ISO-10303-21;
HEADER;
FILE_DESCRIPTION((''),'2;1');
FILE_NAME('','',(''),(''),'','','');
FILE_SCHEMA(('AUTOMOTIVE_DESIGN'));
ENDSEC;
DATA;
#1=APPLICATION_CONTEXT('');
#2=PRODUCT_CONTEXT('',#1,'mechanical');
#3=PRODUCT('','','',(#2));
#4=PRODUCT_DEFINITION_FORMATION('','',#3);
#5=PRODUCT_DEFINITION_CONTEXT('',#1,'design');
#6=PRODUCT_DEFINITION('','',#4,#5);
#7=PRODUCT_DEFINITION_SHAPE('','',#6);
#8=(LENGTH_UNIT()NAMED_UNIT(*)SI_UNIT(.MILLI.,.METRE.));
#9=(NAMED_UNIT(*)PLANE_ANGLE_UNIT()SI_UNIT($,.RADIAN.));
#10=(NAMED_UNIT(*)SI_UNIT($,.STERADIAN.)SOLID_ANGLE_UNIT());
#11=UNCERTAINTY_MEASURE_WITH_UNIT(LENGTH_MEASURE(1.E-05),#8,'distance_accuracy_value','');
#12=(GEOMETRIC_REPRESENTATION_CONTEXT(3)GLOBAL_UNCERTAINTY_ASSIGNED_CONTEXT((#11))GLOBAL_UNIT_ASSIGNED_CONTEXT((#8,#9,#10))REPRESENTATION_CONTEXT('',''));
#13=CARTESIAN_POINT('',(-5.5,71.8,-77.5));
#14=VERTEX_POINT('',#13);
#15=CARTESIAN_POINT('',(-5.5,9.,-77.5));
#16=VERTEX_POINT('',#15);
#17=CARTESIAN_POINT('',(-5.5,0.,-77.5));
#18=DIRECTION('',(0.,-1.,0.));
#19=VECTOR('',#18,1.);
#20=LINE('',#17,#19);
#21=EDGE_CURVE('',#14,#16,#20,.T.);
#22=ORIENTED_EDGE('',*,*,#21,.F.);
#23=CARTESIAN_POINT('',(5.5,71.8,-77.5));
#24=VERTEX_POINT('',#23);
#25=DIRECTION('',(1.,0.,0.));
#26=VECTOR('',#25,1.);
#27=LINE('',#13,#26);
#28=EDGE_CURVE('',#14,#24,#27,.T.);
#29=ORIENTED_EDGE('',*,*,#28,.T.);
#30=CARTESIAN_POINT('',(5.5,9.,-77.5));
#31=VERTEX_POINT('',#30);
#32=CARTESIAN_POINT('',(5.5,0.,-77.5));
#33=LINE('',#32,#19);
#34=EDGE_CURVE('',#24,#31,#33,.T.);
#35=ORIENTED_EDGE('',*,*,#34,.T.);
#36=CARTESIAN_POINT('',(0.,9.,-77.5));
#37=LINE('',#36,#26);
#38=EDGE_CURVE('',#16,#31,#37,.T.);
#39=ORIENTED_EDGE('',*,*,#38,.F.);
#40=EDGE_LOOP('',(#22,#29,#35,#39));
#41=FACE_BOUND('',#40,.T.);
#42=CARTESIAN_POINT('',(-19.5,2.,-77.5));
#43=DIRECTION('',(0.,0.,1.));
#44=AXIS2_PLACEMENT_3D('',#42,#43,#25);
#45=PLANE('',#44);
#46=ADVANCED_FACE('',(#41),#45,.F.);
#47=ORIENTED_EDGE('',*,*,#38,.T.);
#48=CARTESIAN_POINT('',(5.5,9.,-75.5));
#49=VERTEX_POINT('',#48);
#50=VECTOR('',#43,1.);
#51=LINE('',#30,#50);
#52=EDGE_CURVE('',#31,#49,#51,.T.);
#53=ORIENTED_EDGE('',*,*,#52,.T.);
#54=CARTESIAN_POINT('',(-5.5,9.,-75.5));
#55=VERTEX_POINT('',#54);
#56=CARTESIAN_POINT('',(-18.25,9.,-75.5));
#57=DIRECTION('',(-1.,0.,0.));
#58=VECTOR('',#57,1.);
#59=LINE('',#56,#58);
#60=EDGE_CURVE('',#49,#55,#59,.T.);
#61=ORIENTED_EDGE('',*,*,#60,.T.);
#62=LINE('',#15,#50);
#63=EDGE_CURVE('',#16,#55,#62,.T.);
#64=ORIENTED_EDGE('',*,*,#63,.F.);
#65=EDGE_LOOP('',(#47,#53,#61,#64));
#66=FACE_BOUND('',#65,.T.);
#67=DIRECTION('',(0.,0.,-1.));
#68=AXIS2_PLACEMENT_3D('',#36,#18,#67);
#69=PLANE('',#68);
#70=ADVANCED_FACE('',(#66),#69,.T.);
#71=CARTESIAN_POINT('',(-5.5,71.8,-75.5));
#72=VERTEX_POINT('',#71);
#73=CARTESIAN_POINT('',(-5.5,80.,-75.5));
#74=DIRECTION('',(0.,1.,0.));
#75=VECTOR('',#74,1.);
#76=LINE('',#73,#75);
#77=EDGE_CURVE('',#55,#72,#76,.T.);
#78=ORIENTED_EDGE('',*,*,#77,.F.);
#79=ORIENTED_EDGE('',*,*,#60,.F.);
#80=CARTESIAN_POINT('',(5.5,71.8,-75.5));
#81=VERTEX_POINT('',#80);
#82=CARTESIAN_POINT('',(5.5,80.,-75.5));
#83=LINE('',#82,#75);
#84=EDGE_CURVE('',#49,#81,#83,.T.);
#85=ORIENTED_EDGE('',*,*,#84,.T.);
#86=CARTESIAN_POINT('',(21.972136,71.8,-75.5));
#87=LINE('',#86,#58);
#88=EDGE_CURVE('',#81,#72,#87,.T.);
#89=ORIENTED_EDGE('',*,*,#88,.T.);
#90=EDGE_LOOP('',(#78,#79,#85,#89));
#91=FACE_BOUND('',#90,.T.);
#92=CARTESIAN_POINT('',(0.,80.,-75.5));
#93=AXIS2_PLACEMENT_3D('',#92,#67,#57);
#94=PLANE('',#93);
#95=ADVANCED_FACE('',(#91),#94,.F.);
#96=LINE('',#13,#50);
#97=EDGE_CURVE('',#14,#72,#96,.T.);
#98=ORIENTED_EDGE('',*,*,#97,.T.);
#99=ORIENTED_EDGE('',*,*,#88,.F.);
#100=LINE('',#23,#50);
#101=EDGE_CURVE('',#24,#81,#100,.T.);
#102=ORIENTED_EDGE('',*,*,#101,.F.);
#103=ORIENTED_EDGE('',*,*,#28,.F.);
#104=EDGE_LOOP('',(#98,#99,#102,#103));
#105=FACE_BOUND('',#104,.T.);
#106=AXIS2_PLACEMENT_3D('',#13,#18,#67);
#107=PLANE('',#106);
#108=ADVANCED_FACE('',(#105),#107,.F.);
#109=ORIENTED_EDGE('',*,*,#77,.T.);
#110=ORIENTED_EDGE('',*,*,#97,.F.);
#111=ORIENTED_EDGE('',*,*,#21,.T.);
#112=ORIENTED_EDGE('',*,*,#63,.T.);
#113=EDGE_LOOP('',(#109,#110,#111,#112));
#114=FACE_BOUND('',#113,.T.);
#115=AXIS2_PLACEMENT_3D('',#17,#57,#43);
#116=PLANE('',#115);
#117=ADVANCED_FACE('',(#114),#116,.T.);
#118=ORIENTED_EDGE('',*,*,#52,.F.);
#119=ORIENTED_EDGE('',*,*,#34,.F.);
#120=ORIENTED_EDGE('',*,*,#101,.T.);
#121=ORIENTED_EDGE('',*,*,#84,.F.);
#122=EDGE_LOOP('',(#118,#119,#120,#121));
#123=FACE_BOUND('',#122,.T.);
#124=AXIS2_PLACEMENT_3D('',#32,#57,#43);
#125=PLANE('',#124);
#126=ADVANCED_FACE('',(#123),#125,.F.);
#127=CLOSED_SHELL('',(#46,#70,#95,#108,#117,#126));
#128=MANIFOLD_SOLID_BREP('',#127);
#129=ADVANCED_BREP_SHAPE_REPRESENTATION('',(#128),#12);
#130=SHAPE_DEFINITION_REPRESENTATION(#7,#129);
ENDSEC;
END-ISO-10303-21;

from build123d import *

# Parameters (mm, degrees)
SKETCH1_W                       = 39
SKETCH1_H                       = 155
BOSS_EXTRUDE1_DEPTH             = 2
BOSS_EXTRUDE2_DEPTH             = 78
SKETCH3_W                       = 2
SKETCH3_H                       = 2
BOSS_EXTRUDE3_DEPTH             = 78
SKETCH4_W                       = 2
SKETCH4_H                       = 2
BOSS_EXTRUDE4_DEPTH             = 151
SKETCH6_W                       = 35
SKETCH6_H                       = 2.2
CUT_EXTRUDE1_DEPTH              = 174.750539568
SKETCH7_W                       = 35
SKETCH7_H                       = 2.2
CUT_EXTRUDE2_DEPTH              = 112.671392935
SKETCH5_W                       = 31
SKETCH5_H                       = 2
BOSS_EXTRUDE5_DEPTH             = 2
BOSS_EXTRUDE6_REACH             = 115.077
SKETCH8_W                       = 2
SKETCH8_H                       = 2
BOSS_EXTRUDE6_DIRECTION_2_REACH = 115.077
SKETCH10_W                      = 2
SKETCH10_H                      = 2.2
SKETCH10_W_2                    = 2.2
SKETCH10_H_2                    = 2
BOSS_EXTRUDE8_DEPTH             = 2
SKETCH11_W                      = 2
SKETCH11_H                      = 2.2
SKETCH11_W_2                    = 2.2
SKETCH11_H_2                    = 2
BOSS_EXTRUDE9_DEPTH             = 2
FILLET2_R                       = 2.5
SKETCH14_W                      = 36.5
SKETCH14_H                      = 7.75
BOSS_EXTRUDE10_DEPTH            = 2
SKETCH13_W                      = 31
SKETCH13_H                      = 3
CUT_EXTRUDE4_DEPTH              = 2
FILLET3_R                       = 2
FILLET4_R                       = 0.5
SKETCH15_R                      = 5.1
CUT_EXTRUDE5_DEPTH              = 114.077407116
SKETCH16_R                      = 7.1
BOSS_EXTRUDE11_DEPTH            = 1
FILLET5_R                       = 0.5
FILLET7_R                       = 0.5
CUT_EXTRUDE7_DEPTH              = 114.077407116
CUT_EXTRUDE7_DEPTH_BACK         = 114.077407116
SKETCH18_W                      = 9
SKETCH18_H                      = 71
CUT_EXTRUDE8_DEPTH              = 113.323194399
CUT_EXTRUDE9_DEPTH              = 81.213776872
CUT_EXTRUDE9_DEPTH_BACK         = 81.213776872
SKETCH19_W                      = 11
SKETCH19_H                      = 8.2


with BuildPart() as part:
    # Sketch1 → Boss-Extrude1 (new body)
    with BuildSketch(Plane(origin=(0, 0, 0), x_dir=(1, 0, 0), z_dir=(0, 1, 0))):
        Rectangle(SKETCH1_W, SKETCH1_H)
    extrude(amount=BOSS_EXTRUDE1_DEPTH)

    # Sketch2 → Boss-Extrude2 (add)
    with BuildSketch(Plane(origin=(0, 2, 0), x_dir=(1, 0, 0), z_dir=(0, 1, 0))):
        Polygon((-17.5, -77.5), (-17.5, -75.5), (-17.5, 75.5), (17.5, 75.5), (17.5, -75.5), (17.5, -77.5), (19.5, -77.5), (19.5, 77.5), (-19.5, 77.5), (-19.5, -77.5), align=None)
    extrude(amount=BOSS_EXTRUDE2_DEPTH)

    # Sketch3 → Boss-Extrude3 (add)
    with BuildSketch(Plane(origin=(0, 2, 0), x_dir=(1, 0, 0), z_dir=(0, 1, 0))):
        with Locations((-16.5, -76.5)):
            Rectangle(SKETCH3_W, SKETCH3_H)
        with Locations((-16.5, -72.3)):
            Rectangle(SKETCH3_W, SKETCH3_H)
        with Locations((16.5, -76.5)):
            Rectangle(SKETCH3_W, SKETCH3_H)
        with Locations((16.5, -72.3)):
            Rectangle(SKETCH3_W, SKETCH3_H)
    extrude(amount=BOSS_EXTRUDE3_DEPTH)

    # Sketch4 → Boss-Extrude4 (add)
    with BuildSketch(Plane.XY.offset(-75.5)):
        with Locations((-16.5, 79)):
            Rectangle(SKETCH4_W, SKETCH4_H)
        Polygon((-15.5, 73.8), (-17.5, 71.8), (-17.5, 75.8), (-15.5, 75.8), align=None)
        Polygon((15.5, 75.8), (17.5, 75.8), (17.5, 71.8), (15.5, 73.8), align=None)
        with Locations((16.5, 79)):
            Rectangle(SKETCH4_W, SKETCH4_H)
    extrude(amount=BOSS_EXTRUDE4_DEPTH)

    # Sketch6 → Cut-Extrude1 (cut, through all)
    with BuildSketch(Plane.XY.offset(-75.5)):
        with Locations((0, 76.9)):
            Rectangle(SKETCH6_W, SKETCH6_H)
    extrude(amount=CUT_EXTRUDE1_DEPTH, mode=Mode.SUBTRACT)

    # Sketch7 → Cut-Extrude2 (cut, through all)
    with BuildSketch(Plane(origin=(0, 2, 0), x_dir=(1, 0, 0), z_dir=(0, 1, 0))):
        with Locations((0, -74.4)):
            Rectangle(SKETCH7_W, SKETCH7_H)
    extrude(amount=CUT_EXTRUDE2_DEPTH, mode=Mode.SUBTRACT)

    # Sketch5 → Boss-Extrude5 (add)
    with BuildSketch(Plane(origin=(0, 2, 0), x_dir=(1, 0, 0), z_dir=(0, 1, 0))):
        with Locations((0, -76.5)):
            Rectangle(SKETCH5_W, SKETCH5_H)
        with Locations((0, -72.3)):
            Rectangle(SKETCH5_W, SKETCH5_H)
    extrude(amount=BOSS_EXTRUDE5_DEPTH)

    # Boss-Extrude6: up to this face of the body (flat: up to its plane)
    boss_extrude6_end = Plane(part.part.faces().sort_by_distance((17.5, 36.9, -2.1))[0])
    # Sketch8 → Boss-Extrude6 (add, up to the picked face)
    with BuildSketch(Plane(origin=(0, 0, 0), x_dir=(0, 0, -1), z_dir=(1, 0, 0)), mode=Mode.PRIVATE) as boss_extrude6_sk1:
        with Locations((74.5, 79)):
            Rectangle(SKETCH8_W, SKETCH8_H)
    boss_extrude6_tool1 = split(extrude(boss_extrude6_sk1.sketch, amount=BOSS_EXTRUDE6_REACH, mode=Mode.PRIVATE), bisect_by=boss_extrude6_end, keep=Keep.BOTH, mode=Mode.PRIVATE)
    # Sketch8 → Boss-Extrude6 (add, up to the picked face)
    with BuildSketch(Plane(origin=(0, 0, 0), x_dir=(0, 0, -1), z_dir=(1, 0, 0)), mode=Mode.PRIVATE) as boss_extrude6_sk2:
        Polygon((75.5, 75.8), (73.5, 75.8), (73.5, 73.8), (75.5, 71.8), align=None)
    boss_extrude6_tool2 = split(extrude(boss_extrude6_sk2.sketch, amount=BOSS_EXTRUDE6_REACH, mode=Mode.PRIVATE), bisect_by=boss_extrude6_end, keep=Keep.BOTH, mode=Mode.PRIVATE)
    add(boss_extrude6_tool1.solids().sort_by(Axis((0, 79, -74.5), (1, 0, 0)))[0])
    add(boss_extrude6_tool2.solids().sort_by(Axis((0, 74.244444, -74.611111), (1, 0, 0)))[0])

    # Boss-Extrude6 direction 2: up to this face of the body (flat: up to its plane)
    boss_extrude6_direction_2_end = Plane(part.part.faces().sort_by_distance((-17.5, 36.9, -2.1))[0])
    # Sketch8 → Boss-Extrude6 direction 2 (add, up to the picked face)
    with BuildSketch(Plane(origin=(0, 0, 0), x_dir=(0, 0, -1), z_dir=(1, 0, 0)), mode=Mode.PRIVATE) as boss_extrude6_direction_2_sk1:
        with Locations((74.5, 79)):
            Rectangle(SKETCH8_W, SKETCH8_H)
    boss_extrude6_direction_2_tool1 = split(extrude(boss_extrude6_direction_2_sk1.sketch, amount=-BOSS_EXTRUDE6_DIRECTION_2_REACH, mode=Mode.PRIVATE), bisect_by=boss_extrude6_direction_2_end, keep=Keep.BOTH, mode=Mode.PRIVATE)
    # Sketch8 → Boss-Extrude6 direction 2 (add, up to the picked face)
    with BuildSketch(Plane(origin=(0, 0, 0), x_dir=(0, 0, -1), z_dir=(1, 0, 0)), mode=Mode.PRIVATE) as boss_extrude6_direction_2_sk2:
        Polygon((75.5, 75.8), (73.5, 75.8), (73.5, 73.8), (75.5, 71.8), align=None)
    boss_extrude6_direction_2_tool2 = split(extrude(boss_extrude6_direction_2_sk2.sketch, amount=-BOSS_EXTRUDE6_DIRECTION_2_REACH, mode=Mode.PRIVATE), bisect_by=boss_extrude6_direction_2_end, keep=Keep.BOTH, mode=Mode.PRIVATE)
    add(boss_extrude6_direction_2_tool1.solids().sort_by(Axis((0, 79, -74.5), (-1, 0, 0)))[0])
    add(boss_extrude6_direction_2_tool2.solids().sort_by(Axis((0, 74.244444, -74.611111), (-1, 0, 0)))[0])

    # Sketch10 → Boss-Extrude8 (add)
    with BuildSketch(Plane(origin=(-17.5, 0, 0), x_dir=(0, 0, -1), z_dir=(1, 0, 0))):
        with Locations((-76.5, 76.9)):
            Rectangle(SKETCH10_W, SKETCH10_H)
        with Locations((-74.4, 79)):
            Rectangle(SKETCH10_W_2, SKETCH10_H_2)
    extrude(amount=BOSS_EXTRUDE8_DEPTH)

    # Sketch11 → Boss-Extrude9 (add)
    with BuildSketch(Plane.ZY.offset(-17.5)):
        with Locations((76.5, 76.9)):
            Rectangle(SKETCH11_W, SKETCH11_H)
        with Locations((74.4, 79)):
            Rectangle(SKETCH11_W_2, SKETCH11_H_2)
    extrude(amount=BOSS_EXTRUDE9_DEPTH)

    # Fillet2
    fillet2_edges = [part.edges().sort_by_distance(p)[0] for p in [
        (-17.5, 36.9, 71.3),
        (17.5, 36.9, 71.3),
        (19.5, 40, 77.5),
        (-19.5, 40, 77.5),
        (-19.5, 40, -77.5),
        (-17.5, 36.9, -75.5),
        (17.5, 36.9, -75.5),
        (19.5, 40, -77.5),
        (19.5, 80, 0),
        (-19.5, 80, 0),
        (19.5, 0, 0),
        (-19.5, 0, 0),
        (0, 80, -77.5),
        (0, 0, 77.5),
        (0, 0, -77.5),
        (-17.5, 80, 77.5),
        (17.5, 80, 77.5),
    ]]
    fillet(fillet2_edges, radius=FILLET2_R)

    # Sketch14 → Boss-Extrude10 (add)
    with BuildSketch(Plane.XY.offset(-75.5)):
        with Locations((0, 5.125)):
            Rectangle(SKETCH14_W, SKETCH14_H)
    extrude(amount=BOSS_EXTRUDE10_DEPTH)

    # Sketch13 → Cut-Extrude4 (cut)
    with BuildSketch(Plane(origin=(0, 0, -77.5), x_dir=(-1, 0, 0), z_dir=(0, 0, -1))):
        with Locations((0, 5.5)):
            Rectangle(SKETCH13_W, SKETCH13_H)
    extrude(amount=-CUT_EXTRUDE4_DEPTH, mode=Mode.SUBTRACT)

    # Fillet3
    fillet3_edges = [part.edges().sort_by_distance(p)[0] for p in [
        (0, 9, -73.5),
    ]]
    fillet(fillet3_edges, radius=FILLET3_R - 0.0001)  # a hair under: the kernel refuses the full size

    # Fillet4
    fillet4_edges = [part.edges().sort_by_distance(p)[0] for p in [
        (15.5, 5.5, -75.5),
        (15.5, 4, -76.5),
        (0, 7, -75.5),
        (15.5, 7, -76.5),
        (-15.5, 5.5, -75.5),
        (-15.5, 7, -76.5),
        (0, 4, -75.5),
        (-15.5, 4, -76.5),
        (15.5, 5.5, -77.5),
        (0, 4, -77.5),
        (-15.5, 5.5, -77.5),
        (0, 7, -77.5),
    ]]
    fillet(fillet4_edges, radius=FILLET4_R)

    # Sketch15 → Cut-Extrude5 (cut, through all)
    with BuildSketch(Plane.XZ):
        with Locations(Location((0, 38.75, 0), (0, 0, 270))):
            Circle(SKETCH15_R)
        with Locations(Location((0, -38.75, 0), (0, 0, 270))):
            Circle(SKETCH15_R)
    extrude(amount=-CUT_EXTRUDE5_DEPTH, mode=Mode.SUBTRACT)

    # Sketch16 → Boss-Extrude11 (add)
    with BuildSketch(Plane(origin=(0, 2, 0), x_dir=(1, 0, 0), z_dir=(0, 1, 0))):
        with Locations(Location((0, 38.75, 0), (0, 0, 270))):
            Circle(SKETCH16_R)
        with Locations(Location((0, -38.75, 0), (0, 0, 270))):
            Circle(SKETCH16_R)
    extrude(amount=BOSS_EXTRUDE11_DEPTH)

    # Fillet5
    fillet5_edges = [part.edges().sort_by_distance(p)[0] for p in [
        (0, 2, -45.85),
        (0, 3, -45.85),
        (0, 2, 31.65),
        (0, 3, 31.65),
    ]]
    fillet(fillet5_edges, radius=FILLET5_R - 0.0001)  # a hair under: the kernel refuses the full size

    # Fillet7
    fillet7_edges = [part.edges().sort_by_distance(p)[0] for p in [
        (15.5, 80, 0.75),
        (0, 4, 77.5),
        (0, 80, -73.5),
        (-15.5, 80, 0.75),
        (-15.5, 40.75, 77.5),
        (-15.5, 79.267766953, 76.767766953),
        (15.5, 40.75, 77.5),
        (15.5, 79.267766953, 76.767766953),
    ]]
    fillet(fillet7_edges, radius=FILLET7_R)

    # Sketch17 → Cut-Extrude7 (cut, two sides: drawn at the far end of the back side and taken through both)
    with BuildSketch(Plane.XY.offset(-CUT_EXTRUDE7_DEPTH_BACK)):
        Polygon((19.5, 80), (14.5, 80), (14.5, 9), (0, 9), (0, 0), (19.5, 0), align=None)
        Polygon((-14.5, 9), (-14.5, 80), (-19.5, 80), (-19.5, 0), (0, 0), (0, 9), align=None)
    extrude(amount=CUT_EXTRUDE7_DEPTH + CUT_EXTRUDE7_DEPTH_BACK, mode=Mode.SUBTRACT)

    # Sketch18 → Cut-Extrude8 (cut, through all)
    with BuildSketch(Plane.XY):
        with Locations((10, 44.5)):
            Rectangle(SKETCH18_W, SKETCH18_H)
        with Locations((-10, 44.5)):
            Rectangle(SKETCH18_W, SKETCH18_H)
    extrude(amount=-CUT_EXTRUDE8_DEPTH, mode=Mode.SUBTRACT)

    # Sketch19 → Cut-Extrude9 (cut, two sides: drawn at the far end of the back side and taken through both)
    with BuildSketch(Plane.XY.offset(-75.5).offset(-CUT_EXTRUDE9_DEPTH_BACK)):
        with Locations((0, 75.9)):
            Rectangle(SKETCH19_W, SKETCH19_H)
    extrude(amount=CUT_EXTRUDE9_DEPTH + CUT_EXTRUDE9_DEPTH_BACK, mode=Mode.SUBTRACT)


solid = part.part
